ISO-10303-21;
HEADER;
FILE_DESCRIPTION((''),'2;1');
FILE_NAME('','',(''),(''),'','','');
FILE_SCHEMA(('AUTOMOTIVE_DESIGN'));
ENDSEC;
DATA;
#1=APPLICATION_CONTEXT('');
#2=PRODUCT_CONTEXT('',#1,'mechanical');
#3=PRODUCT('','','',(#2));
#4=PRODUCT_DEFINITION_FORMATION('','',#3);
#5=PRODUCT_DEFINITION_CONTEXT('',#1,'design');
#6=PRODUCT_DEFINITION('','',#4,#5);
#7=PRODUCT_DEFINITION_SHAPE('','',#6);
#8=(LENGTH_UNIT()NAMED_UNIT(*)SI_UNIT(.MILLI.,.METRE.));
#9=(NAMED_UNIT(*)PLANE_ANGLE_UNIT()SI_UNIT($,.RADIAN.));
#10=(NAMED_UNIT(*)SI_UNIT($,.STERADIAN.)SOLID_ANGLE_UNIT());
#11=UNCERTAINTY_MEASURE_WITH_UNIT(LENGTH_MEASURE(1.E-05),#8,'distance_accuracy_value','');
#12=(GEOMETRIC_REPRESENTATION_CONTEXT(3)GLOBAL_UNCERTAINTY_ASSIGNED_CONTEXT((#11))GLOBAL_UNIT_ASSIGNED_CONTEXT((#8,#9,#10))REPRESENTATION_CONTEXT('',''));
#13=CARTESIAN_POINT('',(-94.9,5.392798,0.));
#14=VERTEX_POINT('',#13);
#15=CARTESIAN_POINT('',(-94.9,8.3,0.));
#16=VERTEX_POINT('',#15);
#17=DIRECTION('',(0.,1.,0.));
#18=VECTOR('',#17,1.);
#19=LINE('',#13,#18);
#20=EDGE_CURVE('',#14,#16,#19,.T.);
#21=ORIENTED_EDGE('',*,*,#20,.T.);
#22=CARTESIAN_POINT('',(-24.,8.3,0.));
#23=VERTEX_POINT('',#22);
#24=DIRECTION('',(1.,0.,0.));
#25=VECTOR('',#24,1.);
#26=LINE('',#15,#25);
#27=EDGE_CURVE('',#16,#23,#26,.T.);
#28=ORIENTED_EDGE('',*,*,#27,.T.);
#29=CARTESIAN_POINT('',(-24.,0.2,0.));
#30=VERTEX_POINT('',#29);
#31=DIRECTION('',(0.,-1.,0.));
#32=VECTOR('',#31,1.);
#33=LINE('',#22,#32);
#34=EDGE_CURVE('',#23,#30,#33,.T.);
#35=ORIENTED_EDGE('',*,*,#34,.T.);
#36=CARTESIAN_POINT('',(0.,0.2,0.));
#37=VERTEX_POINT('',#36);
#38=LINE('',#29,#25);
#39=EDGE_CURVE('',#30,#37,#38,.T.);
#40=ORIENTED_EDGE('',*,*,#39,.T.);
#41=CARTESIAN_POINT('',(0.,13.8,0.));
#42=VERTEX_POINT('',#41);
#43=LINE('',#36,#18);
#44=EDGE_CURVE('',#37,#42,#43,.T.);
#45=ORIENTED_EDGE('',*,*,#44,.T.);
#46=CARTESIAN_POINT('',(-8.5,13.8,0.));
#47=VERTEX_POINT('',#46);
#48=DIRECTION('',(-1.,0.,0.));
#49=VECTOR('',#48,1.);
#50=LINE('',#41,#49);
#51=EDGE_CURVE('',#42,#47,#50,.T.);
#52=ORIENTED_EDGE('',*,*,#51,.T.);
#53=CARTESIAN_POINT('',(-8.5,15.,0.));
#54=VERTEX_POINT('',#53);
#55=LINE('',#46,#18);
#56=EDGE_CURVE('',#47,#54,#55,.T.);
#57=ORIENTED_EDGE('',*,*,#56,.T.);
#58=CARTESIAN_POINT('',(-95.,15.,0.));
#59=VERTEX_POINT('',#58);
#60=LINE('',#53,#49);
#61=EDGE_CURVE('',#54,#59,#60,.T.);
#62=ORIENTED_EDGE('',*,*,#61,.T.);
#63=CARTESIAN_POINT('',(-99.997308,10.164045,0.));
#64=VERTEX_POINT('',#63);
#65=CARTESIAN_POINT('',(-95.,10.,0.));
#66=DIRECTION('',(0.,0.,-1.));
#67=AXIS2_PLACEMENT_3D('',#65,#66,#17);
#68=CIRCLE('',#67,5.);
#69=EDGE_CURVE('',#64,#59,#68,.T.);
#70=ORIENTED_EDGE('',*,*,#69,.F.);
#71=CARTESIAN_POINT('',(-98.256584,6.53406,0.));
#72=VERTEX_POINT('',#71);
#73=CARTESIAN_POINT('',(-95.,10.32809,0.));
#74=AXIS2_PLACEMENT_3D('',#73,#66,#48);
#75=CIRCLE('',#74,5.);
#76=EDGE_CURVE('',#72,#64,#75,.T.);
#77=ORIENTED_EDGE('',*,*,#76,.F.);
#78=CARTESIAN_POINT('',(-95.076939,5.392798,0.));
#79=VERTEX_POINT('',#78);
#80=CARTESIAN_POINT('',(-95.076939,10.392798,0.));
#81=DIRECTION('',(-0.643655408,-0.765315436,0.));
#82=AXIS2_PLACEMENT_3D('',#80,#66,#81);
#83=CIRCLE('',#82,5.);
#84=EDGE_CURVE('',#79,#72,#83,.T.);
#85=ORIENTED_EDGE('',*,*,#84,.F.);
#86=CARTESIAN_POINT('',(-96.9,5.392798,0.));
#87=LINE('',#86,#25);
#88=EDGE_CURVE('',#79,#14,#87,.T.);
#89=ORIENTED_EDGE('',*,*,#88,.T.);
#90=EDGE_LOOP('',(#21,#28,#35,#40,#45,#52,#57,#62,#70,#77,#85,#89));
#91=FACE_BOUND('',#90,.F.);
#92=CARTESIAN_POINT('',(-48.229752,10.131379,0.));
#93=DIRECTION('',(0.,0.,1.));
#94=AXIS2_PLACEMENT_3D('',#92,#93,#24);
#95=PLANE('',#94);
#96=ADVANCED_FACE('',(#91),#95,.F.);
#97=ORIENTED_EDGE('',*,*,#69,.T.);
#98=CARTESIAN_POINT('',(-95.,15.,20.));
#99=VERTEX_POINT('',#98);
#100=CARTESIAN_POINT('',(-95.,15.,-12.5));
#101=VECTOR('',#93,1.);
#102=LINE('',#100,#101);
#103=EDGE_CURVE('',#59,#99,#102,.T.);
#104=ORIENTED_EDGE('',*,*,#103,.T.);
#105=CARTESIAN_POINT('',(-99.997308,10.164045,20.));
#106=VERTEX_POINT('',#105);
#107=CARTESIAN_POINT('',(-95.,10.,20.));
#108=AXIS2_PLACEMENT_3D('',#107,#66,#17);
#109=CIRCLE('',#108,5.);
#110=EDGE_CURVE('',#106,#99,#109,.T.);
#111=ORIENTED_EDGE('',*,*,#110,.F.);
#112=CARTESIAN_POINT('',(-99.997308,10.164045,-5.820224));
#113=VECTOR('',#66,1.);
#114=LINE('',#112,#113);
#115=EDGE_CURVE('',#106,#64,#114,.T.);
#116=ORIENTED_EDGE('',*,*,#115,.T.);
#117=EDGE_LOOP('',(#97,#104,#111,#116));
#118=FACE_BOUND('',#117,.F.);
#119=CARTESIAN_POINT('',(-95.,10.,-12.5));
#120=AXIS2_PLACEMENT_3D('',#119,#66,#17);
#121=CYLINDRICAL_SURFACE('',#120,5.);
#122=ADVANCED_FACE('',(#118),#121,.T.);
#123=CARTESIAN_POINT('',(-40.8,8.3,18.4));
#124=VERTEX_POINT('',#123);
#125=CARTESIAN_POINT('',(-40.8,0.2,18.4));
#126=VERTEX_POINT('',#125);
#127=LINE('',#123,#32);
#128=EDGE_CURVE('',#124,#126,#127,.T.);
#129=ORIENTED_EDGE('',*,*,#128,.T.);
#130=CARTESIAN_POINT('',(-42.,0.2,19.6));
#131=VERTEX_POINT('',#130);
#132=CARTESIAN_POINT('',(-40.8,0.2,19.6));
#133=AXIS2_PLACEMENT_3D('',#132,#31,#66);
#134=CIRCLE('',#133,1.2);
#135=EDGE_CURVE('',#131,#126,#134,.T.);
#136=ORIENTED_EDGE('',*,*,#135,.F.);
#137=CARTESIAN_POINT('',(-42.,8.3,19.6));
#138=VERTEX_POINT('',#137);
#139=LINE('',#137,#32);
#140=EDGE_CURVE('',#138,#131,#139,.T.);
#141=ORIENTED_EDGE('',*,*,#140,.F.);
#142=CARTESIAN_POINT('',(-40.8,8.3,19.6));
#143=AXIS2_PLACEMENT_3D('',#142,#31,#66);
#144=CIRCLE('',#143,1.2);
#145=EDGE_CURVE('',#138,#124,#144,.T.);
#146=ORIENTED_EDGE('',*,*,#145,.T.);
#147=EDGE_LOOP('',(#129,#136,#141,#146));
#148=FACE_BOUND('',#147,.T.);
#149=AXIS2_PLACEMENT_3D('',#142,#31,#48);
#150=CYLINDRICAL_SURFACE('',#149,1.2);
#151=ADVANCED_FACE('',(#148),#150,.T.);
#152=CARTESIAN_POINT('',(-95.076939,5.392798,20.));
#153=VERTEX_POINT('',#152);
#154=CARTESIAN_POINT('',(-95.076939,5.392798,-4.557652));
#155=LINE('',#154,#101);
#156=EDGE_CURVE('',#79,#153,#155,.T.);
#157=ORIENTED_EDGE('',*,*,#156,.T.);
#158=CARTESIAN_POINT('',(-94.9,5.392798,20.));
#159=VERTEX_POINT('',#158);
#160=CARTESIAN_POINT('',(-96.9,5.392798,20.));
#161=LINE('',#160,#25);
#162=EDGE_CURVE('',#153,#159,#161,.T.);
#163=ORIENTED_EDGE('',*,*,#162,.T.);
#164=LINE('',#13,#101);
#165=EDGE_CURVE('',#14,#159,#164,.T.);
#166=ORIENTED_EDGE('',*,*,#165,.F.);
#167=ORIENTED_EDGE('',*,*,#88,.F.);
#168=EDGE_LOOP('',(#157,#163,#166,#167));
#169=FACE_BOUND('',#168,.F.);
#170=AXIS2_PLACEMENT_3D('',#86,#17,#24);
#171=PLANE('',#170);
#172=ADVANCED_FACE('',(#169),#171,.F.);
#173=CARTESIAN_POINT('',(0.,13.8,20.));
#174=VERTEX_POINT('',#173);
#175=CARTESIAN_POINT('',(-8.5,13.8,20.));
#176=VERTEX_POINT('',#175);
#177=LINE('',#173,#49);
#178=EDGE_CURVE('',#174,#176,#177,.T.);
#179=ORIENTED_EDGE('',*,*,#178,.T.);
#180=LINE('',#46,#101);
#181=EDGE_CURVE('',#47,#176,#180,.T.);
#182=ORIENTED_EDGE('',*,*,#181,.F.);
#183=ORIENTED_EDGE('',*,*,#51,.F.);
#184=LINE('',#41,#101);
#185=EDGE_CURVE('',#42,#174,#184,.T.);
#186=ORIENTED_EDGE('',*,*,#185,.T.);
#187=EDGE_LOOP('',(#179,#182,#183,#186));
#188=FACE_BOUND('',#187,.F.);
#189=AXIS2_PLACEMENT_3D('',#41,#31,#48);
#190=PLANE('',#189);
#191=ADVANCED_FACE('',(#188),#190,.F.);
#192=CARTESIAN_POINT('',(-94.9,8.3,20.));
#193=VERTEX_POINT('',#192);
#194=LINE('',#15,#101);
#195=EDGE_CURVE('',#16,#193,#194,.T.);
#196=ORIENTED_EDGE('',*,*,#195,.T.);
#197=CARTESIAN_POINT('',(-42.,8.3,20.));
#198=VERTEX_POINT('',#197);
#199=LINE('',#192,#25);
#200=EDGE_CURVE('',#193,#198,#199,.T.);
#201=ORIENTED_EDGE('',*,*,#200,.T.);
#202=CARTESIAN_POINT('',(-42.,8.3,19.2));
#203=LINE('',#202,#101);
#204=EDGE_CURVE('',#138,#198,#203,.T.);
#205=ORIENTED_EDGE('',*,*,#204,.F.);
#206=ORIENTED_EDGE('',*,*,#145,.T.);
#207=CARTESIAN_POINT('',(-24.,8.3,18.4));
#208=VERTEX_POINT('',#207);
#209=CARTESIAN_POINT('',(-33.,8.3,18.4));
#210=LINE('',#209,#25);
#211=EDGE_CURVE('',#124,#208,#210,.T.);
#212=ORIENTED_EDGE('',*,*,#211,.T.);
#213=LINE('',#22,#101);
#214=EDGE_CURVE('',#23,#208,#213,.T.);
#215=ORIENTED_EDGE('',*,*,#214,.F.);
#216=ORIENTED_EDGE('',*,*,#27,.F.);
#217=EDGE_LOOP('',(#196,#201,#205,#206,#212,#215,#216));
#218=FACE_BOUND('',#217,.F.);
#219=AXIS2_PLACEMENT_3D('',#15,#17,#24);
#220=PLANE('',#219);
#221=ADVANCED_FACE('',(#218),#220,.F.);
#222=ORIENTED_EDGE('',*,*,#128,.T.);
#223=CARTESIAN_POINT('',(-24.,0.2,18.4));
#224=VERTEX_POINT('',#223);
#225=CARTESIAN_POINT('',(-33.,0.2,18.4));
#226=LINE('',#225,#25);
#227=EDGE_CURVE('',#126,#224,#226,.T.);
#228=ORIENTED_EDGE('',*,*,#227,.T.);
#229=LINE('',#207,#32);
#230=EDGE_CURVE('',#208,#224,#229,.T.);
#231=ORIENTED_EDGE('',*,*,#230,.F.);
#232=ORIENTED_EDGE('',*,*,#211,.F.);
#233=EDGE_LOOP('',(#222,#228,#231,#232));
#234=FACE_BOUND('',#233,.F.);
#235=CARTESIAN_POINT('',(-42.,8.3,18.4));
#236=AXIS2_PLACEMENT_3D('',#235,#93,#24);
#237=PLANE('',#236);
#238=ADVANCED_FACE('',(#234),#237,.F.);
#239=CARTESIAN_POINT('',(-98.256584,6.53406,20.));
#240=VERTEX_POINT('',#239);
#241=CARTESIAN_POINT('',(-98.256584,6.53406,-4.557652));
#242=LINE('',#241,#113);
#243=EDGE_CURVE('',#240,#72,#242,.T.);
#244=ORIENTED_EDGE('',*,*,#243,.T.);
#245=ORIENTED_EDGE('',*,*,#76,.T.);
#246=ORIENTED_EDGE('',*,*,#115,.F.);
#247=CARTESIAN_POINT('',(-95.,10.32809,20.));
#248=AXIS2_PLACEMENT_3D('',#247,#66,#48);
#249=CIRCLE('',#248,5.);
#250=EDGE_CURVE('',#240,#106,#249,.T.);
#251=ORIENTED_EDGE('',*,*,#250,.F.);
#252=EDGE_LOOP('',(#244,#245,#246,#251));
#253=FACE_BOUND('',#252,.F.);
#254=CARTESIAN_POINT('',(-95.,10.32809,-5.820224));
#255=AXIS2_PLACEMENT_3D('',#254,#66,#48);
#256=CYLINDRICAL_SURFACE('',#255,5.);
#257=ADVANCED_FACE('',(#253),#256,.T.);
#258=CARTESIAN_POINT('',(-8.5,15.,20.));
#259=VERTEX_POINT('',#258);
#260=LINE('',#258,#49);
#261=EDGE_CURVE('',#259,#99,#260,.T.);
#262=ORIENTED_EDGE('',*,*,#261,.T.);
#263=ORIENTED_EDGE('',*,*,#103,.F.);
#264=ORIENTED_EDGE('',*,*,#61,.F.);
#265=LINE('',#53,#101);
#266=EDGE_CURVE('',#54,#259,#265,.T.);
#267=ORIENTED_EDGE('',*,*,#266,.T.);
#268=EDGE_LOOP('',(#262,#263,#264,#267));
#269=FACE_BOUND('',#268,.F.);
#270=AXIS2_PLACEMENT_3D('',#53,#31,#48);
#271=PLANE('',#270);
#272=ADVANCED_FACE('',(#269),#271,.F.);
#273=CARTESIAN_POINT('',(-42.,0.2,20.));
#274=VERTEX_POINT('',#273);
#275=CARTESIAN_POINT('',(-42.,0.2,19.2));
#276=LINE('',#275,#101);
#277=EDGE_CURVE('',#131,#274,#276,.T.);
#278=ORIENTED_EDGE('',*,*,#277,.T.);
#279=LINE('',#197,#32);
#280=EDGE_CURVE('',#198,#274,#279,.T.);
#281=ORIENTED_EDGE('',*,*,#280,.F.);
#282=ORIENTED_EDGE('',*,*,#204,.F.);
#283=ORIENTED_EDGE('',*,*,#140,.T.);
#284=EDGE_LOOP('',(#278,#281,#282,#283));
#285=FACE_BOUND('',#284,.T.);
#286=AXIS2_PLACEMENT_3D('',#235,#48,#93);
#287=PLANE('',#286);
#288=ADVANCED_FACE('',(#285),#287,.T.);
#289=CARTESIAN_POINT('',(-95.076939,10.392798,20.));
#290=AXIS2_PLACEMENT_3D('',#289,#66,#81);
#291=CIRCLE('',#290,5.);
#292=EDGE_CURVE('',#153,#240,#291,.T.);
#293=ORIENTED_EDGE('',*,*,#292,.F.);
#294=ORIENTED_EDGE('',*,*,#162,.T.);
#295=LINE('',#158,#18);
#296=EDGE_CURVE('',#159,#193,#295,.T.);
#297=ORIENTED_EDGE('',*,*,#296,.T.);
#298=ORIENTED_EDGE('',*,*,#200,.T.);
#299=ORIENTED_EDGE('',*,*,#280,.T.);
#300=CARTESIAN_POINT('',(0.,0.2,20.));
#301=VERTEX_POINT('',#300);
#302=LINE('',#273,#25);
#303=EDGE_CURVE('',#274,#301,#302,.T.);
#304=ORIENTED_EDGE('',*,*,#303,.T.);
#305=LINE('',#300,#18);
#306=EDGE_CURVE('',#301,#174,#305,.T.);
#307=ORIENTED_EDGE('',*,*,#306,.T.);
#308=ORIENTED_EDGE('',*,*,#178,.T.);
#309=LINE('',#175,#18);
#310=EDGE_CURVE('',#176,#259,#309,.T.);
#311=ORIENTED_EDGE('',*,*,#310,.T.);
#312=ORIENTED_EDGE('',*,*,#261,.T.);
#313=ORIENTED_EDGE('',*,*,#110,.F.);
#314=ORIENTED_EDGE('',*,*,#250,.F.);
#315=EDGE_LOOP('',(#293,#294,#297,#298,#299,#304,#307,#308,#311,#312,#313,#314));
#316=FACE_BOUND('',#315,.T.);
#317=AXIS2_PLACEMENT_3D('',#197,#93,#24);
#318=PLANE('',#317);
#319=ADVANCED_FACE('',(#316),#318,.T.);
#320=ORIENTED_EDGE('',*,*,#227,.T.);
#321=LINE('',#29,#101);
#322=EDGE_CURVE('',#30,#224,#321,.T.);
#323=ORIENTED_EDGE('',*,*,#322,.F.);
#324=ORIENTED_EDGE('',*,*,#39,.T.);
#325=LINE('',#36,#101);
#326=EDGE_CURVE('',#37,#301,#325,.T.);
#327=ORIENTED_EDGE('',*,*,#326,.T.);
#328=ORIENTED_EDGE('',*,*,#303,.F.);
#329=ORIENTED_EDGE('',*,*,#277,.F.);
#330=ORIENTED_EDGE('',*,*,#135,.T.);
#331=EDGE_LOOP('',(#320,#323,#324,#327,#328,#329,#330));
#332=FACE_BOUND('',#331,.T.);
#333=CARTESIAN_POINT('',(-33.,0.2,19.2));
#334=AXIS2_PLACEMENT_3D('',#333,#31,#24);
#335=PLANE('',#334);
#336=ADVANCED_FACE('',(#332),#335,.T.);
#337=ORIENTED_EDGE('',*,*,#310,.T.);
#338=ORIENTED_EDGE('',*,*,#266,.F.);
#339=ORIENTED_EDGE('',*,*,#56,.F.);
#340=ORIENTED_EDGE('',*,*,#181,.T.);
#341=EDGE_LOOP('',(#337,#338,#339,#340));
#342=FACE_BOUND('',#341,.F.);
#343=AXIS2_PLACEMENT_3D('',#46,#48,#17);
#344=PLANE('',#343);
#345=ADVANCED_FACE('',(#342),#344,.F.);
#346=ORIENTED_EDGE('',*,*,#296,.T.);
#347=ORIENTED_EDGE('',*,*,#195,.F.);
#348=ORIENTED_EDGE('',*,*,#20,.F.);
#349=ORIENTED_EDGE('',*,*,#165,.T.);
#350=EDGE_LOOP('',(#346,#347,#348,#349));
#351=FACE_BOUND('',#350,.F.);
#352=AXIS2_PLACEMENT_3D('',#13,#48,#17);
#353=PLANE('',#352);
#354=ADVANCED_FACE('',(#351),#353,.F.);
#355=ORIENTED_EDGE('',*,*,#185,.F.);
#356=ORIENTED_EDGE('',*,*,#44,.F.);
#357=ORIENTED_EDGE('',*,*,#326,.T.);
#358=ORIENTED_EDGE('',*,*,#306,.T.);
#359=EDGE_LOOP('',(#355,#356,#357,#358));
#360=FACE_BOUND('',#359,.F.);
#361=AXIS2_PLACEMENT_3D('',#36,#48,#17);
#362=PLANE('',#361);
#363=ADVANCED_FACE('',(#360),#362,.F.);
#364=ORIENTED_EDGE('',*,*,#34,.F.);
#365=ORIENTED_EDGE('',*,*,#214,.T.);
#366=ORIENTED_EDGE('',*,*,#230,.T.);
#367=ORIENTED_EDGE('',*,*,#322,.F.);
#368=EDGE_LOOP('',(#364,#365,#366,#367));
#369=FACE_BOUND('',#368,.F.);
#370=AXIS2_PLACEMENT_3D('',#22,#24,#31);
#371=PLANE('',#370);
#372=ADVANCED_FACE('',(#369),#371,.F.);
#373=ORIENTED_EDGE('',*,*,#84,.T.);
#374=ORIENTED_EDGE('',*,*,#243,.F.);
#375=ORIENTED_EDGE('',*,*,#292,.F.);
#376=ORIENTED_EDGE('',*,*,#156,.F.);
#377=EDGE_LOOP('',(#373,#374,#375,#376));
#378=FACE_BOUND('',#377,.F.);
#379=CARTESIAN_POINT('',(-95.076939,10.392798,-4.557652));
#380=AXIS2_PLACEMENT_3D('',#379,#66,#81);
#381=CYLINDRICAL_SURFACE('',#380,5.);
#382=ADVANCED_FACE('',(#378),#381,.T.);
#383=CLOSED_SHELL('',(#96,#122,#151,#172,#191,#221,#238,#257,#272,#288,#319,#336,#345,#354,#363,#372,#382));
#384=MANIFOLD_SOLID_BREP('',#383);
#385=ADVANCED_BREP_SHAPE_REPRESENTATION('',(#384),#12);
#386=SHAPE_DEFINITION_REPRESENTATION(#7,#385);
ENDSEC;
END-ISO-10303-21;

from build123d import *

# Parameters (mm, degrees)
F1_DEPTH    = 20
F2_W        = 18
F2_H        = 1.6
F3_DEPTH    = 8.1
F4_R        = 1.2
F5_T1_DEPTH = 29.1153030611
F5_T3_DEPTH = 31.6404483572
F5_T5_DEPTH = 45


# Not quite as in the source:
# - a fillet or chamfer that OpenCascade refuses, or shapes differently, is made with other operations: its cross-section is extruded or revolved along the edge and cut away or added


with BuildPart() as f1:
    # F0 (on Top) → F1 (new body)
    with BuildSketch(Plane.XY):
        Polygon((-24, 0.2), (-8.5, 0.2), (0, 0.2), (0, 1.7), (0, 13.8), (-8.5, 13.8), (-8.5, 15), (-100, 15), (-100, 8), (-96.9, 5.3927982226), (-94.9, 5.3927982226), (-94.9, 8.3), (-24, 8.3), align=None)
    extrude(amount=F1_DEPTH)

    # F2 (on face) → F3 (join)
    with BuildSketch(Plane.XZ.offset(-8.3)):
        with Locations((-33, 19.2)):
            Rectangle(F2_W, F2_H)
    extrude(amount=F3_DEPTH)

    # F4
    f4_edges = [f1.edges().sort_by_distance(p)[0] for p in [
        (-42, 4.25, 18.4),
    ]]
    fillet(f4_edges, radius=F4_R)

    # F5: fillet of radius 5 on 3 edges, made by hand

    # F5_s2 → F5_t1 (cut)
    with BuildSketch(Plane.XY.offset(-4.5576515305)):
        with BuildLine():
            ThreePointArc((-98.2952164267, 6.5662210444), (-96.7897023762, 5.6953049607), (-95.0769393878, 5.3927982226))
            Line((-95.0769393878, 5.3927982226), (-96.9, 5.3927982226))
            Line((-96.9, 5.3927982226), (-98.2952164267, 6.5662210444))
        make_face()
    extrude(amount=F5_T1_DEPTH, mode=Mode.SUBTRACT)

    # F5_s4 → F5_t3 (cut)
    with BuildSketch(Plane.XY.offset(-5.8202241786)):
        with BuildLine():
            ThreePointArc((-100, 10.3280896714), (-99.5327356637, 8.217566655), (-98.2182770389, 6.5015124932))
            Line((-98.2182770389, 6.5015124932), (-100, 8))
            Line((-100, 8), (-100, 10.3280896714))
        make_face()
    extrude(amount=F5_T3_DEPTH, mode=Mode.SUBTRACT)

    # F5_s6 → F5_t5 (cut)
    with BuildSketch(Plane.XY.offset(-12.5)):
        with BuildLine():
            ThreePointArc((-95, 15), (-98.5355339059, 13.5355339059), (-100, 10))
            Line((-100, 10), (-100, 15))
            Line((-100, 15), (-95, 15))
        make_face()
    extrude(amount=F5_T5_DEPTH, mode=Mode.SUBTRACT)


solid = f1.part
